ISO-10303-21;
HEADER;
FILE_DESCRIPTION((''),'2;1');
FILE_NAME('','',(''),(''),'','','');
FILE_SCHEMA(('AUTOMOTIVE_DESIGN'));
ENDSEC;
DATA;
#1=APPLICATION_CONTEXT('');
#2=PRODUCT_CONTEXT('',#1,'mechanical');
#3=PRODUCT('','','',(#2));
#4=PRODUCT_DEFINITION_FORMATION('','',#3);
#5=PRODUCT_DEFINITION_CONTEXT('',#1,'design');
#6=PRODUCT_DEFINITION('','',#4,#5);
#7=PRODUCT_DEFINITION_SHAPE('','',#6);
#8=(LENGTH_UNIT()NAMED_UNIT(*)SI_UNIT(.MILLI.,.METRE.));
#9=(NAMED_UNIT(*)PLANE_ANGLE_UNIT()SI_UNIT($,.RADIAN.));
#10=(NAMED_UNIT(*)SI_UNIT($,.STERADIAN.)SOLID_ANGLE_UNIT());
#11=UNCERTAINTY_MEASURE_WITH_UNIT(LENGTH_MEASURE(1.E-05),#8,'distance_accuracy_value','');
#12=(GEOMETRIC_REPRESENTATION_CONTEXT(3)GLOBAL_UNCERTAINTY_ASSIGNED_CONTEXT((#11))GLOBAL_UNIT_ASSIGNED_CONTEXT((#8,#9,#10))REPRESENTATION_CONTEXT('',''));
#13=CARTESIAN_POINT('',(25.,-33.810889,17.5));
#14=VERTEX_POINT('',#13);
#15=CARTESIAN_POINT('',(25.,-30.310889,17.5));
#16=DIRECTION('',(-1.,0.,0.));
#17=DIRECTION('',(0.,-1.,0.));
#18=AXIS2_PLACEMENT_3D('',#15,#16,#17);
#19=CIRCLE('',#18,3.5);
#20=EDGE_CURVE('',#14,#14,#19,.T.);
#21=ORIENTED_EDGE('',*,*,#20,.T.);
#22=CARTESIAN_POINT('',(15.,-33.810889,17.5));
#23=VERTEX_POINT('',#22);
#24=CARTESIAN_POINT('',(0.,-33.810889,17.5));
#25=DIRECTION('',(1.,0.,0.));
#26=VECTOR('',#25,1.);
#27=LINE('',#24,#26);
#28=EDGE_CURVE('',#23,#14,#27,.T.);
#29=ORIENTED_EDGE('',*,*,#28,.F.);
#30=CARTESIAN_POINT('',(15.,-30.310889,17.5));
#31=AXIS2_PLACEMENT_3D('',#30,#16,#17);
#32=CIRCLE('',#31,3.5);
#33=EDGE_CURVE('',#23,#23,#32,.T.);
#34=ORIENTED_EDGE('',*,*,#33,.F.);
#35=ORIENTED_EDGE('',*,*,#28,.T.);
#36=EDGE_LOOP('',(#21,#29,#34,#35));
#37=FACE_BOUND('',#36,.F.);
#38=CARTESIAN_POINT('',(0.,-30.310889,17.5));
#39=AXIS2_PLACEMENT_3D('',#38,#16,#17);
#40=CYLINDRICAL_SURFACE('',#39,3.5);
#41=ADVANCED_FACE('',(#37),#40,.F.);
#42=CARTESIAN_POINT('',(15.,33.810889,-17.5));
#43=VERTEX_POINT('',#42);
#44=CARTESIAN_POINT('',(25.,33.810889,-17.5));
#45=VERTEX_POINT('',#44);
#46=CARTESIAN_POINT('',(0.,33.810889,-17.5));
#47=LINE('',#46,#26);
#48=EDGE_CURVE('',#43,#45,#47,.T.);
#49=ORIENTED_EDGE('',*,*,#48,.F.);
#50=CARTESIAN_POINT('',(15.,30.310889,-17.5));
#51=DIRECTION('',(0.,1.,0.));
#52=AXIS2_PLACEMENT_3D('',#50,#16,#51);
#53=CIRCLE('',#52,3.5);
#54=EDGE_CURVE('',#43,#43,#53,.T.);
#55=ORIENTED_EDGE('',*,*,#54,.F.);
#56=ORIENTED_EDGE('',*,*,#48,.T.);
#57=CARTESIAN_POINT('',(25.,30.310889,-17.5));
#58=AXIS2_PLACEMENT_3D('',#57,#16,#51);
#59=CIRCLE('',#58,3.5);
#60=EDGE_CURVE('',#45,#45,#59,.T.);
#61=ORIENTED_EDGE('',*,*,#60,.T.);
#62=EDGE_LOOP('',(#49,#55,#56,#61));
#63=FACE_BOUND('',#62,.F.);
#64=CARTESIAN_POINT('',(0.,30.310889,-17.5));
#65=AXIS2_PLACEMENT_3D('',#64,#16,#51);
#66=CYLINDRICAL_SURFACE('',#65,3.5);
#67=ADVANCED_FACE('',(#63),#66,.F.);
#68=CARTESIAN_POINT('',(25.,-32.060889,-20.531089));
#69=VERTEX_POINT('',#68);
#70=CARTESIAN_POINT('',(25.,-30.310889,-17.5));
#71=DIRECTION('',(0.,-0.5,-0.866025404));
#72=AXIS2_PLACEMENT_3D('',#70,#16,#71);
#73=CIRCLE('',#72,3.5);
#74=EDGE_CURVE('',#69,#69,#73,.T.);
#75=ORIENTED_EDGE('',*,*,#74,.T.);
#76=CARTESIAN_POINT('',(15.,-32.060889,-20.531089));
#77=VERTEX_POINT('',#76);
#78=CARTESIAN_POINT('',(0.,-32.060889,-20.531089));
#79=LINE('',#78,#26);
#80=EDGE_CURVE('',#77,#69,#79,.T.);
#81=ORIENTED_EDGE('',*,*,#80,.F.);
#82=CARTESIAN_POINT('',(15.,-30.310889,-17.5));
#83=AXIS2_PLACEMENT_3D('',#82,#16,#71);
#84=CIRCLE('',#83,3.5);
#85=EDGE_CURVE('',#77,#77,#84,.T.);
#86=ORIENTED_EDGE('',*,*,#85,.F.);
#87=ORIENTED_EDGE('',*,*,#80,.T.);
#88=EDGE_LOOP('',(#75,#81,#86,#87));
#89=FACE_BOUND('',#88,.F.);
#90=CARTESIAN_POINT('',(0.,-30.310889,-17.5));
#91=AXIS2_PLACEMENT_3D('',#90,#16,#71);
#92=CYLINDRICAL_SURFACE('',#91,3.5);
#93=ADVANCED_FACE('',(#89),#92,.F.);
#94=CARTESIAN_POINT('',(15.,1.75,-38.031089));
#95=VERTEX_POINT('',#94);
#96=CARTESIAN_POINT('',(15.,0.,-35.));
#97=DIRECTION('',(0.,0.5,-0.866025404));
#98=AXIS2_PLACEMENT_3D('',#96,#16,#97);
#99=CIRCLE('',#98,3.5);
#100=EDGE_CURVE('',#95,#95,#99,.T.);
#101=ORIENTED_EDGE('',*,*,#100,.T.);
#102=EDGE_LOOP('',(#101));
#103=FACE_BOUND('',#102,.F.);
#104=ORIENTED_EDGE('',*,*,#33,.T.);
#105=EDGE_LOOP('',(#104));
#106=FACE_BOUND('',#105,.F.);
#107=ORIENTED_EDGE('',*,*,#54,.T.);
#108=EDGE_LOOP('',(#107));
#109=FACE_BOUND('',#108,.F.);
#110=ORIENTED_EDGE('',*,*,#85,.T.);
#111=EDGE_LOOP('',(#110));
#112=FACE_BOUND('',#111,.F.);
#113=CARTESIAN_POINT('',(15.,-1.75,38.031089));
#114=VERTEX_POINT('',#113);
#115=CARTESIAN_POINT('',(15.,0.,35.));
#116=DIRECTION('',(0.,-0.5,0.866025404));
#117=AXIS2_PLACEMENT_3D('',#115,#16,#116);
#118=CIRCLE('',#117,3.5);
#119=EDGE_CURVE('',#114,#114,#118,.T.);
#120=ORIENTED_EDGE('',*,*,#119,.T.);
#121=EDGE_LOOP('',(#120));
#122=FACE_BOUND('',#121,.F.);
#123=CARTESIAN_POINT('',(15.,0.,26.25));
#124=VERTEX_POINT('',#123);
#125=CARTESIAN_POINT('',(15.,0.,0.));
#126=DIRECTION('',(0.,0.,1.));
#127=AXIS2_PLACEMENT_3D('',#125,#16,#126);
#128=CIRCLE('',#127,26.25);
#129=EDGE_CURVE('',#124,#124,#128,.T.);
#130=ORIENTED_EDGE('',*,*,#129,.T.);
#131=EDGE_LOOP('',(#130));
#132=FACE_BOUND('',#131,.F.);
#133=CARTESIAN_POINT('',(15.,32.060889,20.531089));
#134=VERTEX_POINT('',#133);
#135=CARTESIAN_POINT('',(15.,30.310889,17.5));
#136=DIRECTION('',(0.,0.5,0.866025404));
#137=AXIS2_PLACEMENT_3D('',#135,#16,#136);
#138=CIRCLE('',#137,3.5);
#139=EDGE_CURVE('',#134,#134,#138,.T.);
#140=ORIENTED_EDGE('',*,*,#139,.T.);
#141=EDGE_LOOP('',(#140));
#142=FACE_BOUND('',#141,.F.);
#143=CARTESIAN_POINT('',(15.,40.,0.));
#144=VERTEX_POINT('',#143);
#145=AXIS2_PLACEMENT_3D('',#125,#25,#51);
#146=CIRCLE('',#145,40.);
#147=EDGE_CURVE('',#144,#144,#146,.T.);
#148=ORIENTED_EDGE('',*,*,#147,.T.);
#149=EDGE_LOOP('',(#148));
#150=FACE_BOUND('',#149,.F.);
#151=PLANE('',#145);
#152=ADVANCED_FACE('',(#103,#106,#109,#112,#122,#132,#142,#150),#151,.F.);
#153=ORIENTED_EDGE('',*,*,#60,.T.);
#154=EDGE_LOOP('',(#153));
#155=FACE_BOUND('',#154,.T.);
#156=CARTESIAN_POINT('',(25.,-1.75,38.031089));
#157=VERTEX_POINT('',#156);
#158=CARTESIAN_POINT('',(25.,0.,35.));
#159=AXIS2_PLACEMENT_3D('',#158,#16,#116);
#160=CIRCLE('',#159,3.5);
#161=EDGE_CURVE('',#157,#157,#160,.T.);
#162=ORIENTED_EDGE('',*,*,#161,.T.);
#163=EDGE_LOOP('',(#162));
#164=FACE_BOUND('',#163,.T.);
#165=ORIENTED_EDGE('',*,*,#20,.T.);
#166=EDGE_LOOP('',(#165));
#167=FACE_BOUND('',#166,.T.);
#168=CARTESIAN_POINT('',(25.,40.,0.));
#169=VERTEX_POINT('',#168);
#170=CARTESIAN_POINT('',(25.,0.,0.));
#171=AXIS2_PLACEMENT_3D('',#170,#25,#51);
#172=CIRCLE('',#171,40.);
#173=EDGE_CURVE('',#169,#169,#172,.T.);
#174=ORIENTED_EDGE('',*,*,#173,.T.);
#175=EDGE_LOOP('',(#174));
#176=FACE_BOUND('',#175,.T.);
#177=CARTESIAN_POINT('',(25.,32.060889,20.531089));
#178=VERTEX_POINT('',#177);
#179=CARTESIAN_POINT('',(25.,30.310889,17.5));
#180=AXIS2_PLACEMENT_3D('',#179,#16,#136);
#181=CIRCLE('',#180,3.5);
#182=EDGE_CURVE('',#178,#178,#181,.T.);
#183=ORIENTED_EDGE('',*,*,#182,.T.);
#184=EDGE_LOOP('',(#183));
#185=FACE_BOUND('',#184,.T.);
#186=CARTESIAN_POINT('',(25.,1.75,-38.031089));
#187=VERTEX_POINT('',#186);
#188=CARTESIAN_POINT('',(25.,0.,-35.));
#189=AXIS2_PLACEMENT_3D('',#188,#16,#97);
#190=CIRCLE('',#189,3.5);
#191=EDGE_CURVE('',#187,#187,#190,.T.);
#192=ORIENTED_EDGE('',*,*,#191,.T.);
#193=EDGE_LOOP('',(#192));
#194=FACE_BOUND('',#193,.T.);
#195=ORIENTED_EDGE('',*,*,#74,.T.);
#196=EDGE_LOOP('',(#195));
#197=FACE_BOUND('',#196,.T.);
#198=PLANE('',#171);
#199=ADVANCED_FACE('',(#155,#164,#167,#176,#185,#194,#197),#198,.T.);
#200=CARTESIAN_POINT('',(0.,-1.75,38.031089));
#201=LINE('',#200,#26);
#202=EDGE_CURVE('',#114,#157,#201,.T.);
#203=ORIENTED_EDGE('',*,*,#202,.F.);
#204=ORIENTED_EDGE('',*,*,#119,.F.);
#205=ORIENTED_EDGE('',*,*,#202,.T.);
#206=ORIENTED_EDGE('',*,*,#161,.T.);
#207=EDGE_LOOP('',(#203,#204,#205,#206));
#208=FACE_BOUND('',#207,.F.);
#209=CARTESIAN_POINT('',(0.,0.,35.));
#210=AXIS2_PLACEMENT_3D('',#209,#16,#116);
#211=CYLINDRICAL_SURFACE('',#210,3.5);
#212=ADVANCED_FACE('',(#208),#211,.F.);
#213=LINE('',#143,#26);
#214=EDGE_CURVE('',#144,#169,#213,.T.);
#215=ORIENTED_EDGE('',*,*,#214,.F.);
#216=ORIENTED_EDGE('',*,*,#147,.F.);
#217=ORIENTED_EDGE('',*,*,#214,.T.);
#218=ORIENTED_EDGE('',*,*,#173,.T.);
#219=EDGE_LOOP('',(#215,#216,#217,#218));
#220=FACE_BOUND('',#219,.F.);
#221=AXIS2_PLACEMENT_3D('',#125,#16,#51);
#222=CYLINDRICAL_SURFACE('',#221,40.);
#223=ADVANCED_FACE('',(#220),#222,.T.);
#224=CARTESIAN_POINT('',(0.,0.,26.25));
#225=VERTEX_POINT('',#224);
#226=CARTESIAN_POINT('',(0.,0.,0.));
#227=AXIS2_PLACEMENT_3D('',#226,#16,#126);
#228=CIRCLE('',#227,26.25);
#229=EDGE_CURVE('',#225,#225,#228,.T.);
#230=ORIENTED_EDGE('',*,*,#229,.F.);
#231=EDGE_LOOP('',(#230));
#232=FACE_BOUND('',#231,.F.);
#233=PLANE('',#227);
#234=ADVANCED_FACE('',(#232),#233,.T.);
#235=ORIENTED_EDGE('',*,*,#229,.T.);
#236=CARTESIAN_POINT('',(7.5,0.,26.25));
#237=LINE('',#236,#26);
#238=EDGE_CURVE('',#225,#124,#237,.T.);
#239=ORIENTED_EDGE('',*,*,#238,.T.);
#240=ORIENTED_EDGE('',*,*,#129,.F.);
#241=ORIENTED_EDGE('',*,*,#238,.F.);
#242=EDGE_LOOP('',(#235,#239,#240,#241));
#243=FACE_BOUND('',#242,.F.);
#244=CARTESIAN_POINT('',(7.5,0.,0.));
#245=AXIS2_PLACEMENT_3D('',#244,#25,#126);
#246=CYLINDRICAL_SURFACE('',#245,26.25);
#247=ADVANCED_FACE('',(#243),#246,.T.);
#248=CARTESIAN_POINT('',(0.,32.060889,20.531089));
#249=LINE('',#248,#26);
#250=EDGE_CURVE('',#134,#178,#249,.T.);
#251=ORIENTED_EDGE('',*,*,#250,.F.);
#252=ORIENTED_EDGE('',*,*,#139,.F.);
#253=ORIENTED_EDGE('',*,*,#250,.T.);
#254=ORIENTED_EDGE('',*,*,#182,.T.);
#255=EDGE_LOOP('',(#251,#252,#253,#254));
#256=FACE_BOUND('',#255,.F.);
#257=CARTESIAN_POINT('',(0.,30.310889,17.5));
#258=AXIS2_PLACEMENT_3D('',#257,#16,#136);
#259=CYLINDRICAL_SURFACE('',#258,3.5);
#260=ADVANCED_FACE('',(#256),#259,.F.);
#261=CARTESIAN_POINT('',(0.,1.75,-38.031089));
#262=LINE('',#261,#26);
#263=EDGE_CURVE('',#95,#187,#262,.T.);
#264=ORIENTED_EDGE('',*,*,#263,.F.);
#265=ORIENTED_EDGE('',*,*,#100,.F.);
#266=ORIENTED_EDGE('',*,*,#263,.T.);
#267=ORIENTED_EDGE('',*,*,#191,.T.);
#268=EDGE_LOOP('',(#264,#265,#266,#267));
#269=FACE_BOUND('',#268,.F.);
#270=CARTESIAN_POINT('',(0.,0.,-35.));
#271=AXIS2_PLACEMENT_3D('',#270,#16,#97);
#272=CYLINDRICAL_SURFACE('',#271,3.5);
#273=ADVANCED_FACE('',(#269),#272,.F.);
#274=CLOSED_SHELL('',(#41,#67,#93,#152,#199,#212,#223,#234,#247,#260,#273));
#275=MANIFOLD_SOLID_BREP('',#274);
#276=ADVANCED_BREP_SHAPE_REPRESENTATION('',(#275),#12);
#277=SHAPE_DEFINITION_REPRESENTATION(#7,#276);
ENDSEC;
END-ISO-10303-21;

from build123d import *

# Parameters (mm, degrees)
F0_W            = 15
F0_H            = 26.25
F2_R            = 40
F2_R_2          = 26.25
F3_DEPTH        = 10
F4_R            = 3.5
F5_DEPTH        = 25.001
F5_COPIES_COUNT = 6


# Not quite as in the source:
# - a pattern or mirror of a feature is missing from the dataset's text; its kind, count and spacing are read off the source's solid


with BuildPart() as f1:
    # F0 (on Front) → F1 (revolve)
    with BuildSketch(Plane.XZ):
        with Locations((7.5, 13.125)):
            Rectangle(F0_W, F0_H)
    revolve(axis=Axis((-28.7704151153, 0, 0), (-1, 0, 0)))

    # F2 (on face) → F3 (join)
    with BuildSketch(Plane.YZ.offset(15)):
        Circle(F2_R)
        Circle(F2_R_2, mode=Mode.SUBTRACT)
        Circle(F2_R_2)
    extrude(amount=F3_DEPTH)

    # F4 (on face) → F5 (cut, through all)
    with BuildSketch(Plane(origin=(0, 0, 0), x_dir=(0, -1, 0), z_dir=(-1, 0, 0))):
        with Locations((30.3108891325, 17.5)):
            Circle(F4_R)
    f5 = extrude(amount=-F5_DEPTH, mode=Mode.SUBTRACT)

    # F5_copies: F5 ×6 about axis
    f5_copies_axis = Axis((0, 0, 0), (1, 0, 0))
    for i in range(1, F5_COPIES_COUNT):
        add(f5.rotate(f5_copies_axis, i * 360 / F5_COPIES_COUNT), mode=Mode.SUBTRACT)


solid = f1.part
